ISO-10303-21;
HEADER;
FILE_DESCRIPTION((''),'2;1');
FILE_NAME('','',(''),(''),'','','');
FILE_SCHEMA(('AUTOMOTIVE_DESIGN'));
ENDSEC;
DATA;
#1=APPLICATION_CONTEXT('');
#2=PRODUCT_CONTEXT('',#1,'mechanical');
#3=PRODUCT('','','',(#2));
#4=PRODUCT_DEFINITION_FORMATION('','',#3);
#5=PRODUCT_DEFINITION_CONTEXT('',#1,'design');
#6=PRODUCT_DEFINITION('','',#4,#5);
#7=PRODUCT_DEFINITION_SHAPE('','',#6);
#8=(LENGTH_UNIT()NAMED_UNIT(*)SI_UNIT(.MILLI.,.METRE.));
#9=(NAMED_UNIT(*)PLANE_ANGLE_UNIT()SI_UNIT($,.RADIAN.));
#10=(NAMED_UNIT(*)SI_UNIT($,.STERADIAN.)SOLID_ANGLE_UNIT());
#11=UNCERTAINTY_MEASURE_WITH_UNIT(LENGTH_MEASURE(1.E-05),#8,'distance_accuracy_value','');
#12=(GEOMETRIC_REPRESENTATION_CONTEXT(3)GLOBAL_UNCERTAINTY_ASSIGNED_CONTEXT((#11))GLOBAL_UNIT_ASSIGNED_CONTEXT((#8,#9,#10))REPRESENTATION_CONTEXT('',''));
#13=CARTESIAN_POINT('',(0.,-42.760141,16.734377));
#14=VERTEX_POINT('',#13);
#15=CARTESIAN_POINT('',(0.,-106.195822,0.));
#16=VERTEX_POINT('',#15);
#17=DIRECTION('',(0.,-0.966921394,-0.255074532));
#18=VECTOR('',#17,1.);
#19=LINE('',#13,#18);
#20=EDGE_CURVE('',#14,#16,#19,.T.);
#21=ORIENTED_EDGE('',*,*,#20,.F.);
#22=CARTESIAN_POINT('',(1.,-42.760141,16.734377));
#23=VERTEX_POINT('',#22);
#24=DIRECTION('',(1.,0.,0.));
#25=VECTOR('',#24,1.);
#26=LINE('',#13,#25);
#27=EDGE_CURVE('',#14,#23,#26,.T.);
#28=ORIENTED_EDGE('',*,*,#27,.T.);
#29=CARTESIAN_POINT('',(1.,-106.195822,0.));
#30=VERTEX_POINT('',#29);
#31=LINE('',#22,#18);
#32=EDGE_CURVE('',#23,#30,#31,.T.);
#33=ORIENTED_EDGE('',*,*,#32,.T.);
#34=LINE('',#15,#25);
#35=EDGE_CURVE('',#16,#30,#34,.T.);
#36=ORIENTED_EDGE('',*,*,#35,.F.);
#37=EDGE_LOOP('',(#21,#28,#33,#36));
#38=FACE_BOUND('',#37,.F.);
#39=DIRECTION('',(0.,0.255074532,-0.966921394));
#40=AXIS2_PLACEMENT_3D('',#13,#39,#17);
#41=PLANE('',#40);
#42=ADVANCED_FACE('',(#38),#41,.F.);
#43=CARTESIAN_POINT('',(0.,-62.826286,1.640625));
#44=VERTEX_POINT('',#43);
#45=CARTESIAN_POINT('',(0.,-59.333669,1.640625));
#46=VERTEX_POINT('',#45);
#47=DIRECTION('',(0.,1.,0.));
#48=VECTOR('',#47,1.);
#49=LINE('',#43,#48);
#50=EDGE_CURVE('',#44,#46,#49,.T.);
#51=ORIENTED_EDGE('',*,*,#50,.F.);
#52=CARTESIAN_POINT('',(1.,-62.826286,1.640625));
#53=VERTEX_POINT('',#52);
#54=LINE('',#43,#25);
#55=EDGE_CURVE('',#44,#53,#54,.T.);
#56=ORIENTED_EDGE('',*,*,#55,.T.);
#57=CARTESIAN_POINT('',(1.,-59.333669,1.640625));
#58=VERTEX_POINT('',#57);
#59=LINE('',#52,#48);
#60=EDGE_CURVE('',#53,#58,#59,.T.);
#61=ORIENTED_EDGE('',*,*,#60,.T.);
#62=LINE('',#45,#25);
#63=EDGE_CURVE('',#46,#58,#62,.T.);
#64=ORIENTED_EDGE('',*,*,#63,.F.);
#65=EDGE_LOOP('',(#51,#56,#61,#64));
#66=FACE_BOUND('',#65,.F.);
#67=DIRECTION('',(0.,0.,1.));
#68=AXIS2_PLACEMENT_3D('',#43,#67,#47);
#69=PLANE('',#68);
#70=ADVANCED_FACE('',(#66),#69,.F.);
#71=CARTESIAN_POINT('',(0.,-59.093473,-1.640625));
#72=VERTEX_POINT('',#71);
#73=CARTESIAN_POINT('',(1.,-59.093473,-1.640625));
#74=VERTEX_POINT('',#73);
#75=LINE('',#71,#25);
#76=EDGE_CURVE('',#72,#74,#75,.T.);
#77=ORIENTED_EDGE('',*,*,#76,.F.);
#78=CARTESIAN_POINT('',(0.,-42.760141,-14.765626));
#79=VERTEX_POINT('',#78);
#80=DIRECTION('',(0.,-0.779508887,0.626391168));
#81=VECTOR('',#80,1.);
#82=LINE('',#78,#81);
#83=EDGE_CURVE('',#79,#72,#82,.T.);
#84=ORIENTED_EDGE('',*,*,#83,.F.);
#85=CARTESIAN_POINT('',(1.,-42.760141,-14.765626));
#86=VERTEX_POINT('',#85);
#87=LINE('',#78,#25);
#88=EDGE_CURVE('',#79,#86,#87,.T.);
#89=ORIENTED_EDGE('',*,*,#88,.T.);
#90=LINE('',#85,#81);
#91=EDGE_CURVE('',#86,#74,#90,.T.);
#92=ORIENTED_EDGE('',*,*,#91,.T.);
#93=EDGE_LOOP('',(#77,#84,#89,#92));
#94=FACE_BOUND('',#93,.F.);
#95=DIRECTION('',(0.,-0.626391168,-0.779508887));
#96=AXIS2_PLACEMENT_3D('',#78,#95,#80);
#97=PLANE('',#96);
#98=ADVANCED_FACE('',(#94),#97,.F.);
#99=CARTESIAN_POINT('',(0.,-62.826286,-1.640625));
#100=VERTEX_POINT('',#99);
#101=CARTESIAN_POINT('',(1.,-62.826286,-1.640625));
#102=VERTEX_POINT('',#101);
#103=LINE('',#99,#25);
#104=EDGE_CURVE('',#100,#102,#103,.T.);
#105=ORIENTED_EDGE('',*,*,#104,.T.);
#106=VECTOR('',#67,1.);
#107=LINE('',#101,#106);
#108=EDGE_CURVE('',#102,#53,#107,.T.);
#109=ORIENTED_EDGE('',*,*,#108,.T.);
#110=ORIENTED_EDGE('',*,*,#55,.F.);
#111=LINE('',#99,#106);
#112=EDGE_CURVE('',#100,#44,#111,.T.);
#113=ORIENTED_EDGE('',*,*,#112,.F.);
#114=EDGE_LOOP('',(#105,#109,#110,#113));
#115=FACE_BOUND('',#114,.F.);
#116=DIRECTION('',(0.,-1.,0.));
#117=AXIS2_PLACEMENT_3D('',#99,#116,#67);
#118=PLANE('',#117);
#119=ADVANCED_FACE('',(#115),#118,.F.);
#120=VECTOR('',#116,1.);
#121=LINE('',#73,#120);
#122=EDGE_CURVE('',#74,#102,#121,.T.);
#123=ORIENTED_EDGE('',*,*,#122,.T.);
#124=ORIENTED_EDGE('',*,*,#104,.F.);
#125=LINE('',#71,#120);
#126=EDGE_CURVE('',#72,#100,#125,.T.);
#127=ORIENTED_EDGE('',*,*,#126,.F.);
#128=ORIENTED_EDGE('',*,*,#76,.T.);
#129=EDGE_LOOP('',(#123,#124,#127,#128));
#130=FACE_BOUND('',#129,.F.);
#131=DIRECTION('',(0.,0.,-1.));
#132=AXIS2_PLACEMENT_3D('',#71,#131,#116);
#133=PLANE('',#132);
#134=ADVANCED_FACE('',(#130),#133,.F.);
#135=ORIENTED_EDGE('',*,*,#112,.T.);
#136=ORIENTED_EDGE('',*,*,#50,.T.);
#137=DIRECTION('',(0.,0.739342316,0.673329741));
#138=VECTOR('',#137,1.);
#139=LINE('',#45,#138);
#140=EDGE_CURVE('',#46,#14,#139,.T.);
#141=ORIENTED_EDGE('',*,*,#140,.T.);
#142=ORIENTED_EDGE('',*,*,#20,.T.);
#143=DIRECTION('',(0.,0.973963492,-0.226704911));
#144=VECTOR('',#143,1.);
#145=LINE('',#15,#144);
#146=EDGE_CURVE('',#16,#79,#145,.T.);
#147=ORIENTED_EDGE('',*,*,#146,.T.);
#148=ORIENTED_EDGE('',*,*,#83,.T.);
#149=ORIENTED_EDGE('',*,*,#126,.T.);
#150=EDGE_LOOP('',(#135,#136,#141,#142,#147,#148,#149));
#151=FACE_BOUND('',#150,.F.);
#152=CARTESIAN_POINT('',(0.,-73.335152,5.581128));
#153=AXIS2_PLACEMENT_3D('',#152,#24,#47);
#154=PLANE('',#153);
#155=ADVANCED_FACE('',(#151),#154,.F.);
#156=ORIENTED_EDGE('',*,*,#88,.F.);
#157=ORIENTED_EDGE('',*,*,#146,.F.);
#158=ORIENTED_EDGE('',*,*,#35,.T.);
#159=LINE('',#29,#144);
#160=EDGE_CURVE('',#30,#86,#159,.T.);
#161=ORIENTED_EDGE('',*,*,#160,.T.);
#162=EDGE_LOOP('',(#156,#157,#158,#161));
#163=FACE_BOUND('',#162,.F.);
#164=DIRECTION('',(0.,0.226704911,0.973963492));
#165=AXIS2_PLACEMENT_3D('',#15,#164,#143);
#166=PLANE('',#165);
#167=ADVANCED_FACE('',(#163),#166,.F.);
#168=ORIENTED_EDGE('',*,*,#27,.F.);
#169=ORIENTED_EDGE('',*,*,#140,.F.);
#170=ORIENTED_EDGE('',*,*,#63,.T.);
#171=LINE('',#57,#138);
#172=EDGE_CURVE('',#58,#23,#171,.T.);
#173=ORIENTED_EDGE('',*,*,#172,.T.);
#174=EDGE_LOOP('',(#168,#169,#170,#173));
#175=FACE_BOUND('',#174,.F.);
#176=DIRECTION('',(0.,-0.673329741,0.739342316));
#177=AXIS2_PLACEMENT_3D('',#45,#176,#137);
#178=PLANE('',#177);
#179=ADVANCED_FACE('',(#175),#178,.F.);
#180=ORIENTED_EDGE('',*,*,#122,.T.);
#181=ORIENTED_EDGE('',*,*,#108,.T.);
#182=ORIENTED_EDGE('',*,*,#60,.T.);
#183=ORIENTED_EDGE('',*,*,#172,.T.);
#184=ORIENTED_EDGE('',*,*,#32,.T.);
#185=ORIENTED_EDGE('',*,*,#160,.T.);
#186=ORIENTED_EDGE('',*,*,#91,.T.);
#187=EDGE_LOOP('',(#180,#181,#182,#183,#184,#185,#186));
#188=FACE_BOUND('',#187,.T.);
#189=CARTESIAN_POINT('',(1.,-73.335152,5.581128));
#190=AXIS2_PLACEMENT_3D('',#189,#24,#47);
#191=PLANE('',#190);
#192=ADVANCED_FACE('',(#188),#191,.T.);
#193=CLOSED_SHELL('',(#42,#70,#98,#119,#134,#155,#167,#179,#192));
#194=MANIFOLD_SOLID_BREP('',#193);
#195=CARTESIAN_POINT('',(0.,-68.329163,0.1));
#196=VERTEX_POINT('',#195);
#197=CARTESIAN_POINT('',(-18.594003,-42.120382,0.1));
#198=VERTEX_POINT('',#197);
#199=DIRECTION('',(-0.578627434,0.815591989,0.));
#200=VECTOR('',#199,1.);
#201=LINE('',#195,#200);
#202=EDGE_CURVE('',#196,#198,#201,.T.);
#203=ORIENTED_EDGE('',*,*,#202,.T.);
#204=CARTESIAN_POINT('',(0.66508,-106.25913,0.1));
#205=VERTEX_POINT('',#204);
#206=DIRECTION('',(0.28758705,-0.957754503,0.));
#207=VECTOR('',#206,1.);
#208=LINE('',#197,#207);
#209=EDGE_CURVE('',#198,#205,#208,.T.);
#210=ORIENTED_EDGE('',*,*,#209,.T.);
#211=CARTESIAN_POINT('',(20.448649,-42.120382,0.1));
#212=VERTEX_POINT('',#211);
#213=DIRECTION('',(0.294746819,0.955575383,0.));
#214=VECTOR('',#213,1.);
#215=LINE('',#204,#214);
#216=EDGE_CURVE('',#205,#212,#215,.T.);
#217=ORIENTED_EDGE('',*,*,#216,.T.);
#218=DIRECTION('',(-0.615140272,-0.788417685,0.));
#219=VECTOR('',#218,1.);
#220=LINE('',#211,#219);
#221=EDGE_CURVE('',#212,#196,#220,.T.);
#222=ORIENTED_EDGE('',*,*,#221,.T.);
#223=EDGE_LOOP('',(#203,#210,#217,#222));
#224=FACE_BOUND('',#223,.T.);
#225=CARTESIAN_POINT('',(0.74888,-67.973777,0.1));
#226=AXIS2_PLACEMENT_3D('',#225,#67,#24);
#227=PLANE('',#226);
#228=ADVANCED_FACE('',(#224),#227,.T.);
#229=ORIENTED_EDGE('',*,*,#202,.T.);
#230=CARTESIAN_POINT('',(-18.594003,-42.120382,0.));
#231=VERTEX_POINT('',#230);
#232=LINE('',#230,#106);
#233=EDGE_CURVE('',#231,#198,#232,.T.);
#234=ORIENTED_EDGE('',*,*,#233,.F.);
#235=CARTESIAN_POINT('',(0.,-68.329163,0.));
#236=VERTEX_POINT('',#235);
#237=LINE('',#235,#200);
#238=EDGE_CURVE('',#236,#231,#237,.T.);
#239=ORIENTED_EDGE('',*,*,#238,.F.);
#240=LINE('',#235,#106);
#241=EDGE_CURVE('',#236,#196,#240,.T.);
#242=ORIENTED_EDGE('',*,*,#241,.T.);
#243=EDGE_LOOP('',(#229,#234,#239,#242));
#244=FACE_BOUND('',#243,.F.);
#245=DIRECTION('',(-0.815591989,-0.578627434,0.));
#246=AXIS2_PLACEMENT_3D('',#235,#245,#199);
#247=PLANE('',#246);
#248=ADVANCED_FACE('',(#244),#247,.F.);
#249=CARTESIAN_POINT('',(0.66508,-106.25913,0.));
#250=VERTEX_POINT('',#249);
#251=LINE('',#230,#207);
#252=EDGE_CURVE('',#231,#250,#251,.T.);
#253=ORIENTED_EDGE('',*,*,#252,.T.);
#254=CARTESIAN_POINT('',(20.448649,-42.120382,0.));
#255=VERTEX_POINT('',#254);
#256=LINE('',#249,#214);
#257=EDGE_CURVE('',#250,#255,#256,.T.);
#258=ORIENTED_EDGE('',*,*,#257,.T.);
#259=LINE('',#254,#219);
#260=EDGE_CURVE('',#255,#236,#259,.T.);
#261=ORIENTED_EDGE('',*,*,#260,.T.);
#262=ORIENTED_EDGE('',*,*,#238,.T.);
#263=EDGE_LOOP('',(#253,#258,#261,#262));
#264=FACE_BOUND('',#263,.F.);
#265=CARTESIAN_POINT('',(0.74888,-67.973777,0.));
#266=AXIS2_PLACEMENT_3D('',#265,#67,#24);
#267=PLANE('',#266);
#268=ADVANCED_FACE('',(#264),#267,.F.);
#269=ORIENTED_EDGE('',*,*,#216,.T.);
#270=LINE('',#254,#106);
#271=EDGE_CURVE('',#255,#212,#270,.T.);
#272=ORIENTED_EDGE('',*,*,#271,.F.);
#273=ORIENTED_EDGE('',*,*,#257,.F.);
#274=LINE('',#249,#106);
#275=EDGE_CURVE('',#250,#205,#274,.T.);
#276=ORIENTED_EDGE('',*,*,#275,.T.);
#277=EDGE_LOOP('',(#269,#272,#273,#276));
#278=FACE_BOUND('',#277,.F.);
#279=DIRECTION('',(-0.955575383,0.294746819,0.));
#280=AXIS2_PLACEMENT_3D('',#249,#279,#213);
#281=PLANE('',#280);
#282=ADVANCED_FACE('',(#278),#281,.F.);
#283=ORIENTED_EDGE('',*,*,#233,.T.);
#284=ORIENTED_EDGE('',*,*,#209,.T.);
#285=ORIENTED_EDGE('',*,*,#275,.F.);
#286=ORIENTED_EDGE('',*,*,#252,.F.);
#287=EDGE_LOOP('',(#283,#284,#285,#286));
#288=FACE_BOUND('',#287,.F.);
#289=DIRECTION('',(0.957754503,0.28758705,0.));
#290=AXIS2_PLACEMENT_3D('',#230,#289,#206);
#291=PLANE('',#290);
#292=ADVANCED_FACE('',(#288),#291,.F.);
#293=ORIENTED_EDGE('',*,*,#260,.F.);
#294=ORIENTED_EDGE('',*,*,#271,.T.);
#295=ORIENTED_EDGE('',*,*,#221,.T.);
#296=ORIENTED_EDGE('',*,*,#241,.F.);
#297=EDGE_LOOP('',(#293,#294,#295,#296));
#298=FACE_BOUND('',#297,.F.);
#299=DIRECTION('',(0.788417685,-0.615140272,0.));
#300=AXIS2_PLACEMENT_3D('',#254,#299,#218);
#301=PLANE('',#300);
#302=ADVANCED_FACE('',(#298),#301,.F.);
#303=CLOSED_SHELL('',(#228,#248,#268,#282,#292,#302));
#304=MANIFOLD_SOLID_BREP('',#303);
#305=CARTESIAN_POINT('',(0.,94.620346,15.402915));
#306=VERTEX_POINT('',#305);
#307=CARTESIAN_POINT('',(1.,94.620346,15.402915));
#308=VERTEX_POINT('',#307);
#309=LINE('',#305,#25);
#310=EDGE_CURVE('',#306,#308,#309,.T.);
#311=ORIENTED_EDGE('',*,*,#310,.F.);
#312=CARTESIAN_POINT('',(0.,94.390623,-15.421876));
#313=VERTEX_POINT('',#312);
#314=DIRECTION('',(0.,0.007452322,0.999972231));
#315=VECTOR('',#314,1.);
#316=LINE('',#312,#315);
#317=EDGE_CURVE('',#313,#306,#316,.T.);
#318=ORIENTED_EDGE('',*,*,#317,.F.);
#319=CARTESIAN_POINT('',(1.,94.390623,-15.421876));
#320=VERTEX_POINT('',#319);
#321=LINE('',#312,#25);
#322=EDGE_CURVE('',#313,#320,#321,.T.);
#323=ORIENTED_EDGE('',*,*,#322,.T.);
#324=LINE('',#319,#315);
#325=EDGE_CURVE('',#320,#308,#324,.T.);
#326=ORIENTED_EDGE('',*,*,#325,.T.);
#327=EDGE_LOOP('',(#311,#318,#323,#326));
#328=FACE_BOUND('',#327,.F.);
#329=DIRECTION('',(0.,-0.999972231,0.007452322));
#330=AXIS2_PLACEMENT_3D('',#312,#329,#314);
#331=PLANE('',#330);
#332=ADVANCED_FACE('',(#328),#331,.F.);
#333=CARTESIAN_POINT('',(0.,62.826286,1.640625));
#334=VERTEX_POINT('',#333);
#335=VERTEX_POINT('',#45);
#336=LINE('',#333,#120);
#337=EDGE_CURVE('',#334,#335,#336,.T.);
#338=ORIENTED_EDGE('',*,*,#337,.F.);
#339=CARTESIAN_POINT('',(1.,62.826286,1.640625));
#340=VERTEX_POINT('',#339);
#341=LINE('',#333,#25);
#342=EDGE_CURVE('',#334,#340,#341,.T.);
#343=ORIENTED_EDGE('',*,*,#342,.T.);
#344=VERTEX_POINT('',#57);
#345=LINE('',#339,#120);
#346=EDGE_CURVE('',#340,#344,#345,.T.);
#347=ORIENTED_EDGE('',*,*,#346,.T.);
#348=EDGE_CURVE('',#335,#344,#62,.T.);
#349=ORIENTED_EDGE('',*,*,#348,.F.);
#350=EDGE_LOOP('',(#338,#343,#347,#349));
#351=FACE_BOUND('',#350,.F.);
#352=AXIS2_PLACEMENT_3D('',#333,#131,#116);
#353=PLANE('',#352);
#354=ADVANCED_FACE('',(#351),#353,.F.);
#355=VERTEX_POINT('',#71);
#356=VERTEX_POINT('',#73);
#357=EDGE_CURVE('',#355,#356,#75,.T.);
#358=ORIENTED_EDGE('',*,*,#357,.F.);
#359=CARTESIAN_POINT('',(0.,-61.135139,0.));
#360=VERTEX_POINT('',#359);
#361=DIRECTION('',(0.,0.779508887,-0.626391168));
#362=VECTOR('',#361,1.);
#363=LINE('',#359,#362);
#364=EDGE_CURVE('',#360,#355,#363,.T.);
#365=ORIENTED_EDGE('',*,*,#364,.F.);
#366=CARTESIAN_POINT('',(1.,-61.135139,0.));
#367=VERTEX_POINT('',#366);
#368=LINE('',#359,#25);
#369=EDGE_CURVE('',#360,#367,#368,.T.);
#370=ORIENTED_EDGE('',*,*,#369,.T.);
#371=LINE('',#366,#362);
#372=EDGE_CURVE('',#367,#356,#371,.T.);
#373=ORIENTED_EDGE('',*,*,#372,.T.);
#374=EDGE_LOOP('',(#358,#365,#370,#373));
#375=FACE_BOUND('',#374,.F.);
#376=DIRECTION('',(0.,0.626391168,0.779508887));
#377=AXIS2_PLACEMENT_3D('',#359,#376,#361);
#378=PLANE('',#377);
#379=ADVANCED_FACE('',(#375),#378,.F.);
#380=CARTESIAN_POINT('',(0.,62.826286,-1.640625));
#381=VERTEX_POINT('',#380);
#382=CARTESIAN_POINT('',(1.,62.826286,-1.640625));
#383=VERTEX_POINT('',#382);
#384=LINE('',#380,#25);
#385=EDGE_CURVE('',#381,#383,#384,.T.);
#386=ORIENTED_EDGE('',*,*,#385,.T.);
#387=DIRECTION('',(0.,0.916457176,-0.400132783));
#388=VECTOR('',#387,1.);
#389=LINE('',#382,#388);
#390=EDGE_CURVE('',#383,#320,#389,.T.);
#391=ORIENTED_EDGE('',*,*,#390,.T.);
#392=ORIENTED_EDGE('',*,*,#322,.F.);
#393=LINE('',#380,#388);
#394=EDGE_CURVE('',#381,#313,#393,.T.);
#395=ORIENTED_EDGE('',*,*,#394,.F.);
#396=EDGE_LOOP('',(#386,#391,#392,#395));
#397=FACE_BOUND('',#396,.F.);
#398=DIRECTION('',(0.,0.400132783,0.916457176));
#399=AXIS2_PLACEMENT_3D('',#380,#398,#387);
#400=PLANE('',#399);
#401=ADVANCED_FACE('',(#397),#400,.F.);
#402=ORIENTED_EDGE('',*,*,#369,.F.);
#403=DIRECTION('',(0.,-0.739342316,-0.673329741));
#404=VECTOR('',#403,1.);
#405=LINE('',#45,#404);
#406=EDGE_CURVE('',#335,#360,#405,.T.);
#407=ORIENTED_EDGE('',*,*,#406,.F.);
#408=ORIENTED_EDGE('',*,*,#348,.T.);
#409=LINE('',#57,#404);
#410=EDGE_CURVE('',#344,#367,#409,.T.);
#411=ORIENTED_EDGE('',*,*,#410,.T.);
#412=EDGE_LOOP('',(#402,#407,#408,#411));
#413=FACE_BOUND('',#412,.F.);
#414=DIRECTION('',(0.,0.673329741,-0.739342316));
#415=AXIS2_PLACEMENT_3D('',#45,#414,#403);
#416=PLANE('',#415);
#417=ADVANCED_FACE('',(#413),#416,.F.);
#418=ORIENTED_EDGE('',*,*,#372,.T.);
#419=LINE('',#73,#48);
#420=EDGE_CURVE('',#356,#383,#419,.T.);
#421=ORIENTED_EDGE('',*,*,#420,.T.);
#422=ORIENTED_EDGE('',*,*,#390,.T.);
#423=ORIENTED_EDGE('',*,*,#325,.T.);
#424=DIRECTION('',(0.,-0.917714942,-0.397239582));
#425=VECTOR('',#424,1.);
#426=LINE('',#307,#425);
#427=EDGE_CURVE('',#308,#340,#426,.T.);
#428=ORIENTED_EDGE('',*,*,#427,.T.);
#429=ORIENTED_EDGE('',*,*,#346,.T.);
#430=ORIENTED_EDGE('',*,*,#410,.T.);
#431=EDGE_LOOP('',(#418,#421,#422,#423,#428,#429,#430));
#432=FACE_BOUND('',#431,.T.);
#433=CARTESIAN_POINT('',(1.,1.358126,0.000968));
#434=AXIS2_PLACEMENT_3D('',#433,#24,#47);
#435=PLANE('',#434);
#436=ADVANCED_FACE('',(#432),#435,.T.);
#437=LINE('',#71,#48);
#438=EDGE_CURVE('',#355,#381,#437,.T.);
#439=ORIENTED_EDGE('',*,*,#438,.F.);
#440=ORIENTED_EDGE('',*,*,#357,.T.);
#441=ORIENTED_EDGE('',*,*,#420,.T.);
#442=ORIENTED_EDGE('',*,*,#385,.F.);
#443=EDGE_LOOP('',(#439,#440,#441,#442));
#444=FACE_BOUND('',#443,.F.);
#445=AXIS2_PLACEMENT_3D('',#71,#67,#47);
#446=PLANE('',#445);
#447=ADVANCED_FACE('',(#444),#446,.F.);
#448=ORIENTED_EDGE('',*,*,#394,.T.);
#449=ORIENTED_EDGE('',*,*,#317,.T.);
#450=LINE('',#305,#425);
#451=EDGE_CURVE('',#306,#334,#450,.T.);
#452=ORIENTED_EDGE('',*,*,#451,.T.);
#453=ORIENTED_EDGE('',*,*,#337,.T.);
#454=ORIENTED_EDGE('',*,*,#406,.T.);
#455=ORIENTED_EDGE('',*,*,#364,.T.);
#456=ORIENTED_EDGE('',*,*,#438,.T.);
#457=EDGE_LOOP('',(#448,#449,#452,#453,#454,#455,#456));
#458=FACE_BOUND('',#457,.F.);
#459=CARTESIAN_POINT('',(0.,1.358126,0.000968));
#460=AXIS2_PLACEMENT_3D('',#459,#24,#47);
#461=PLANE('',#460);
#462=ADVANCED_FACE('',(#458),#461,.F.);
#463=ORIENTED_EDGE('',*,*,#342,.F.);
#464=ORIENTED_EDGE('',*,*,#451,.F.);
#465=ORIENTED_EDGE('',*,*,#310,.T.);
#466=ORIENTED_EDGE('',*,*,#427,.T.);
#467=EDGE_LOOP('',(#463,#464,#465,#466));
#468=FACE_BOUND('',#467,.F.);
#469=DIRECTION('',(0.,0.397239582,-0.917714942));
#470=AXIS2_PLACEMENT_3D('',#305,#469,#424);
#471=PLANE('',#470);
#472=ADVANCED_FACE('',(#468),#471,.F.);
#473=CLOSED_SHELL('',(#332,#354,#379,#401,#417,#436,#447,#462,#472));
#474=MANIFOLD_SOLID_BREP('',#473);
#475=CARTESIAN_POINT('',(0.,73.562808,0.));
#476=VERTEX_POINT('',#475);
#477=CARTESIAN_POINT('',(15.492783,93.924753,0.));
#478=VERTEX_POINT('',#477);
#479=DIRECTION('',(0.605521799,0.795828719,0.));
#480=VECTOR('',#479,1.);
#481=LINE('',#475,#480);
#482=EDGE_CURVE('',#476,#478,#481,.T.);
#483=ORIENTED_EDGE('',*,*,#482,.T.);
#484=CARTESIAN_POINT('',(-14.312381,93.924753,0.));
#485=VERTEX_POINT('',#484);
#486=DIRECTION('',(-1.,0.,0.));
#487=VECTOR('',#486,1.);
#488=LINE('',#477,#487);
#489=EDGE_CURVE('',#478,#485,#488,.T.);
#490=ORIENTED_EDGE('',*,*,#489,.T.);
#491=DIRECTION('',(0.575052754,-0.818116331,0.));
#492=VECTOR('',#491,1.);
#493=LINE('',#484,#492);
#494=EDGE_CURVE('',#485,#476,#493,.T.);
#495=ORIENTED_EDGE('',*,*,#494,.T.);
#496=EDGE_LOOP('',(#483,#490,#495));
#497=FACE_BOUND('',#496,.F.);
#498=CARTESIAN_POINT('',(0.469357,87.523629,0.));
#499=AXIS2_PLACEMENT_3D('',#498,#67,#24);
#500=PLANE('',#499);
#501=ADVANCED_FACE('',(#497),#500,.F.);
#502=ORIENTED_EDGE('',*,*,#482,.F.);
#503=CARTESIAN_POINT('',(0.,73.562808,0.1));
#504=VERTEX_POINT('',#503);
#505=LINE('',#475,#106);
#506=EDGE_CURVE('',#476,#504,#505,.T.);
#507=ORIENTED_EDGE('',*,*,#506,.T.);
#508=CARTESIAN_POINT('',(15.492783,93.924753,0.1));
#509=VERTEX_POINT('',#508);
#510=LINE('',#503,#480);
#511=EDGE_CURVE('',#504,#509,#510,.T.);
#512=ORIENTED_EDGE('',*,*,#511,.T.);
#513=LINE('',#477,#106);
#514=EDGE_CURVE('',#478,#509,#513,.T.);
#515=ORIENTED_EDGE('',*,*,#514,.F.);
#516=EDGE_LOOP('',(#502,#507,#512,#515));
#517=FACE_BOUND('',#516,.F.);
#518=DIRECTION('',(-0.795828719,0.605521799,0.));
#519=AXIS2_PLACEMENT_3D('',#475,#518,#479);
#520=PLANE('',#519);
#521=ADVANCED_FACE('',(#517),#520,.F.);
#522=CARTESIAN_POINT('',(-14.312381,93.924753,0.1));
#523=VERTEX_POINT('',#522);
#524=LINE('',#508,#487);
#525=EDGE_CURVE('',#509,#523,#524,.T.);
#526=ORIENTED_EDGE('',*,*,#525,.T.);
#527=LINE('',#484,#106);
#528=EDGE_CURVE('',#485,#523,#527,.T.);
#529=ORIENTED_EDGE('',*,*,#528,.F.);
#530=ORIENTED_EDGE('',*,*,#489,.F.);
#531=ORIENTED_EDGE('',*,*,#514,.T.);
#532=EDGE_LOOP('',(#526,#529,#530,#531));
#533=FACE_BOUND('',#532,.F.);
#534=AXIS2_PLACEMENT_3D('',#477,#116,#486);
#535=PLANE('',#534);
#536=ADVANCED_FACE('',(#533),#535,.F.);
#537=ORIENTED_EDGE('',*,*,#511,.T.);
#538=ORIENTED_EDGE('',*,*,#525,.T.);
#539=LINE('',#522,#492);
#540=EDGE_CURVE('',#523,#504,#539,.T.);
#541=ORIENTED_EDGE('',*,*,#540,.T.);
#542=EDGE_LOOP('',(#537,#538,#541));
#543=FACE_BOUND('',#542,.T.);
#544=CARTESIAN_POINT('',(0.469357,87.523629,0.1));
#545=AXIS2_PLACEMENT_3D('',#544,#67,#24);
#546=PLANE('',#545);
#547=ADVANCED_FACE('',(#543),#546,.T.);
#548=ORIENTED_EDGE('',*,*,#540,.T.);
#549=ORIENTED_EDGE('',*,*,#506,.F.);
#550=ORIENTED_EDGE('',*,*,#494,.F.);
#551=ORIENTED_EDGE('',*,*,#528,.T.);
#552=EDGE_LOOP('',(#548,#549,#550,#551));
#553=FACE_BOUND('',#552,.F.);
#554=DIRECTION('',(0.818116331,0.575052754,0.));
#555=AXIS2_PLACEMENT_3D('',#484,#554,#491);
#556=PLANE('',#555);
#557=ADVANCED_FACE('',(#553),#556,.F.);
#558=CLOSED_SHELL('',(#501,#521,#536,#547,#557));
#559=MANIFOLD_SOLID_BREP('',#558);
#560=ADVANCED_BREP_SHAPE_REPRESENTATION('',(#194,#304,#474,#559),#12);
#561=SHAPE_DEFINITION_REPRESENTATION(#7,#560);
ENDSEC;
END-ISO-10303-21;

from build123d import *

# Parameters (mm, degrees)
F1_DEPTH = 1
F3_DEPTH = 0.1


# Not quite as in the source:
# - a feature names something its author has since deleted; it is built from what else it names


with BuildPart() as f1:
    # F0 (on Right) → F1 (new body)
    with BuildSketch(Plane.YZ):
        Polygon((62.826286089, -1.6406250652), (62.826286089, 1.6406250652), (-59.3336690074, 1.6406250652), (-61.1351393163, 0), (-59.0934728905, -1.6406250652), align=None)
        Polygon((94.6203459122, 15.4029149351), (62.826286089, 1.6406250652), (62.826286089, -1.6406250652), (94.3906232715, -15.4218757525), align=None)
    extrude(amount=F1_DEPTH)


with BuildPart() as f1b:
    # F0 (on Right) → F1, piece 2 (new body)
    with BuildSketch(Plane.YZ):
        Polygon((-62.826286089, 1.6406250652), (-59.3336690074, 1.6406250652), (-42.7601411939, 16.7343765497), (-106.1958223581, 0), (-62.826286089, 0), align=None)
        Polygon((-42.7601411939, -14.7656258196), (-59.0934728905, -1.6406250652), (-62.826286089, -1.6406250652), (-62.826286089, 0), (-106.1958223581, 0), align=None)
    extrude(amount=F1_DEPTH)


with BuildPart() as f3:
    # F2 (on Top) → F3 (new body)
    with BuildSketch(Plane.XY):
        Polygon((20.4486493021, -42.1203821898), (0, -68.3291633233), (-18.5940028665, -42.1203821898), (0.6650799187, -106.2591299415), align=None)
    extrude(amount=F3_DEPTH)


with BuildPart() as f3b:
    # F2 (on Top) → F3, piece 2 (new body)
    with BuildSketch(Plane.XY):
        Polygon((-14.3123809248, 93.9247533679), (0, 73.5628083348), (15.492782928, 93.9247533679), align=None)
    extrude(amount=F3_DEPTH)


solid = Compound([f1.part, f1b.part, f3.part, f3b.part])
